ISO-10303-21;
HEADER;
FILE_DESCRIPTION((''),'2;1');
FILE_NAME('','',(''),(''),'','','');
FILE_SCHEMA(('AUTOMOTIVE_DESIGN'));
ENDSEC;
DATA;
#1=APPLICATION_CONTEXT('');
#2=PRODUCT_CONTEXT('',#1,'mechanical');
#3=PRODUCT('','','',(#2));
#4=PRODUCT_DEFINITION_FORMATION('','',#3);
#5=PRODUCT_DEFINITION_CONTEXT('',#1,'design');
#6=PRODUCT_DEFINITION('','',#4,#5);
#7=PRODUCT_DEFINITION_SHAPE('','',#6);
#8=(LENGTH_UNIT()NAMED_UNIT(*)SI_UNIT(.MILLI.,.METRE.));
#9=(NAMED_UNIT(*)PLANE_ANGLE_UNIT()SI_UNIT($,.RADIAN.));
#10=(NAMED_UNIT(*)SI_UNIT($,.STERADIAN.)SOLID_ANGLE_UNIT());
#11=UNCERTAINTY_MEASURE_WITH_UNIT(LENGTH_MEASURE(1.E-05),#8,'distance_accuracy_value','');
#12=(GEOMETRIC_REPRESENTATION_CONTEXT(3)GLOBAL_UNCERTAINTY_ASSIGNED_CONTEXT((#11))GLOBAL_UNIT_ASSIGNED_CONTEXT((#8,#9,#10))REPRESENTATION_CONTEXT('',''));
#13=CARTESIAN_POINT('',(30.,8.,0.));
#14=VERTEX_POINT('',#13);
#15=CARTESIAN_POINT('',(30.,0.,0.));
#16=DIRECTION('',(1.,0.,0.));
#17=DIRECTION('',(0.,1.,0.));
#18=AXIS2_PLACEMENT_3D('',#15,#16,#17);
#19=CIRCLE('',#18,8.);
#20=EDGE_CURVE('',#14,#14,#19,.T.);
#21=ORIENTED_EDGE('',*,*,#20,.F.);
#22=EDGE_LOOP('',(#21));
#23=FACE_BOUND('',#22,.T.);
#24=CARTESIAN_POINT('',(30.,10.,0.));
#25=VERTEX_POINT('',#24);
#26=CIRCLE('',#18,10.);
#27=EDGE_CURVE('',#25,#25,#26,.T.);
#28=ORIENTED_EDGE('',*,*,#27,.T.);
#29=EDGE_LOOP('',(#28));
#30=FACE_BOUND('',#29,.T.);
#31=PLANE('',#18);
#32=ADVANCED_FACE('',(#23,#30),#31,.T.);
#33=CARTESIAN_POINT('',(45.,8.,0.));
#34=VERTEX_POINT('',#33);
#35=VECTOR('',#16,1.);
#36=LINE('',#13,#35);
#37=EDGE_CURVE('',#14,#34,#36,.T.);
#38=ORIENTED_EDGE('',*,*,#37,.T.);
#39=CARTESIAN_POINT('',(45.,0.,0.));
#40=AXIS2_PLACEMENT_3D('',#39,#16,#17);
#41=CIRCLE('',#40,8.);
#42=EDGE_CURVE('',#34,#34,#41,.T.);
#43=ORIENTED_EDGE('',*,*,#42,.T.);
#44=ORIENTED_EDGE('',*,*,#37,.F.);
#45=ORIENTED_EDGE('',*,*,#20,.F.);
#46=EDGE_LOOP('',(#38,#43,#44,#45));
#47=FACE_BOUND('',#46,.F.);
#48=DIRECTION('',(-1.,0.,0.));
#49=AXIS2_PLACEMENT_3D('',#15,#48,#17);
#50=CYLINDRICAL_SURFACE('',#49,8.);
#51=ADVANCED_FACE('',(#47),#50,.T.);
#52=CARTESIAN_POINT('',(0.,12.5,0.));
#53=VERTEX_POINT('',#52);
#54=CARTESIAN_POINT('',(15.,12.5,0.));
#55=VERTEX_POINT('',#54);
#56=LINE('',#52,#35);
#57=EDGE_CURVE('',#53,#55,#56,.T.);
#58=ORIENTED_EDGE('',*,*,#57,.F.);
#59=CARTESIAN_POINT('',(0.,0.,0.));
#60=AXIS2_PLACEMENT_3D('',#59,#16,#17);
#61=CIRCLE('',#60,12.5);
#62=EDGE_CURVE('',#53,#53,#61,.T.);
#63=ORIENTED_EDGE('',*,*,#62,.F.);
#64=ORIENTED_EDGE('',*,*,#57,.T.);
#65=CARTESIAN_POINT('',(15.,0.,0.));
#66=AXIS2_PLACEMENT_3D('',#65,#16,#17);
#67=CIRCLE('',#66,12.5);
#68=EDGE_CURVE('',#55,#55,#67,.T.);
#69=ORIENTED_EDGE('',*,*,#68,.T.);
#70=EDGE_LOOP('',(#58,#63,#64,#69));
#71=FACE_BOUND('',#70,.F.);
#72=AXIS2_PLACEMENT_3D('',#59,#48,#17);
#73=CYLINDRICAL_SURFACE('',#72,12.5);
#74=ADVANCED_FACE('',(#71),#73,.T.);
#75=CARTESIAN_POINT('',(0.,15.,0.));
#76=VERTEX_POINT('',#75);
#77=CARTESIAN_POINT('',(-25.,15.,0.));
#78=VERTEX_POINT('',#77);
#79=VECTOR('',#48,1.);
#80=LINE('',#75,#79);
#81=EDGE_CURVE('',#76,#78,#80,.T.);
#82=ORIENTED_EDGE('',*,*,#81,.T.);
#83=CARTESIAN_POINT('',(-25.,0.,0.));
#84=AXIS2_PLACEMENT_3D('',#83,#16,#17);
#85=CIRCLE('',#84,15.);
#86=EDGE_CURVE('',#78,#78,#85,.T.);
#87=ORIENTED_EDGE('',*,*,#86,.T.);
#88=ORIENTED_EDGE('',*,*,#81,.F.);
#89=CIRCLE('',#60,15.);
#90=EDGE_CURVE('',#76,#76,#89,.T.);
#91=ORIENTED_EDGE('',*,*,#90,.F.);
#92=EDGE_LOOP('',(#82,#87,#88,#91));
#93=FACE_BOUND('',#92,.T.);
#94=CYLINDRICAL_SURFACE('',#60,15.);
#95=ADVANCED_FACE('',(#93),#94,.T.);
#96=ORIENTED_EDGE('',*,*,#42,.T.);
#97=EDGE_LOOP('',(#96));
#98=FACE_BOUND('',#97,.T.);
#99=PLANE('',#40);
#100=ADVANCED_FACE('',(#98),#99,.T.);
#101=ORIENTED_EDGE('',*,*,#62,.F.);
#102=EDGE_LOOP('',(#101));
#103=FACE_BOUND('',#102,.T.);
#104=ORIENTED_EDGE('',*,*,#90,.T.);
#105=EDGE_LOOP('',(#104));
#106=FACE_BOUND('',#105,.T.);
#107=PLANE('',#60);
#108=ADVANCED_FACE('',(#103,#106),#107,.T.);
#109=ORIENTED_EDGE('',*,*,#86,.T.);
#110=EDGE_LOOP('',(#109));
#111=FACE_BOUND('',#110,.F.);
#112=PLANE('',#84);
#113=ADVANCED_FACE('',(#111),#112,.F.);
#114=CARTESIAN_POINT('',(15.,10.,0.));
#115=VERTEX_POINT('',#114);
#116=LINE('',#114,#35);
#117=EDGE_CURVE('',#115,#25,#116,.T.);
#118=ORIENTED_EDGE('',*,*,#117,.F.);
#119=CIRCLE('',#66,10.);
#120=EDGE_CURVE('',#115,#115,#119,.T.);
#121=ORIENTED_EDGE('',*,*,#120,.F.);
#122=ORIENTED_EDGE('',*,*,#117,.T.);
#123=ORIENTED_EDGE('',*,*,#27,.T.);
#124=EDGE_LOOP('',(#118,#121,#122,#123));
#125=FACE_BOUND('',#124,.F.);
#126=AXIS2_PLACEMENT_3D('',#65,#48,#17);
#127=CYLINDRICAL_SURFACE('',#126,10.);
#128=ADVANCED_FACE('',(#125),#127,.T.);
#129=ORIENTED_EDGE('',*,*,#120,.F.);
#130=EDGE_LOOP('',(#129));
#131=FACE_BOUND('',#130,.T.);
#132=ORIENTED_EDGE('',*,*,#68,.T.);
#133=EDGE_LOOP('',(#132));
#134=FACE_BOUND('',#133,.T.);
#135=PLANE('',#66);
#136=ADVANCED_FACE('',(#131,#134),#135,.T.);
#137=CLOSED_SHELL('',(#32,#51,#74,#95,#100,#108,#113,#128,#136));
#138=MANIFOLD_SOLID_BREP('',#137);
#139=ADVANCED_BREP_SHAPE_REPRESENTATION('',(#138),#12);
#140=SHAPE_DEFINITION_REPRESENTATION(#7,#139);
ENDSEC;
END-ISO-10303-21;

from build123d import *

# Parameters (mm, degrees)
F0_R     = 15
F1_DEPTH = 25
F2_R     = 12.5
F3_DEPTH = 15
F4_R     = 10
F5_DEPTH = 15
F6_R     = 8
F7_DEPTH = 15


# Not quite as in the source:
# - the program builds the solid bodies; features that only make, move or delete a surface that nothing else refers to are left out


with BuildPart() as f1:
    # F0 (on Right) → F1 (new body)
    with BuildSketch(Plane.YZ):
        Circle(F0_R)
    extrude(amount=-F1_DEPTH)

    # F2 (on face) → F3 (join)
    with BuildSketch(Plane.YZ):
        Circle(F2_R)
    extrude(amount=F3_DEPTH)

    # F4 (on face) → F5 (join)
    with BuildSketch(Plane.YZ.offset(15)):
        Circle(F4_R)
    extrude(amount=F5_DEPTH)

    # F6 (on face) → F7 (join)
    with BuildSketch(Plane.YZ.offset(30)):
        Circle(F6_R)
    extrude(amount=F7_DEPTH)


solid = f1.part
